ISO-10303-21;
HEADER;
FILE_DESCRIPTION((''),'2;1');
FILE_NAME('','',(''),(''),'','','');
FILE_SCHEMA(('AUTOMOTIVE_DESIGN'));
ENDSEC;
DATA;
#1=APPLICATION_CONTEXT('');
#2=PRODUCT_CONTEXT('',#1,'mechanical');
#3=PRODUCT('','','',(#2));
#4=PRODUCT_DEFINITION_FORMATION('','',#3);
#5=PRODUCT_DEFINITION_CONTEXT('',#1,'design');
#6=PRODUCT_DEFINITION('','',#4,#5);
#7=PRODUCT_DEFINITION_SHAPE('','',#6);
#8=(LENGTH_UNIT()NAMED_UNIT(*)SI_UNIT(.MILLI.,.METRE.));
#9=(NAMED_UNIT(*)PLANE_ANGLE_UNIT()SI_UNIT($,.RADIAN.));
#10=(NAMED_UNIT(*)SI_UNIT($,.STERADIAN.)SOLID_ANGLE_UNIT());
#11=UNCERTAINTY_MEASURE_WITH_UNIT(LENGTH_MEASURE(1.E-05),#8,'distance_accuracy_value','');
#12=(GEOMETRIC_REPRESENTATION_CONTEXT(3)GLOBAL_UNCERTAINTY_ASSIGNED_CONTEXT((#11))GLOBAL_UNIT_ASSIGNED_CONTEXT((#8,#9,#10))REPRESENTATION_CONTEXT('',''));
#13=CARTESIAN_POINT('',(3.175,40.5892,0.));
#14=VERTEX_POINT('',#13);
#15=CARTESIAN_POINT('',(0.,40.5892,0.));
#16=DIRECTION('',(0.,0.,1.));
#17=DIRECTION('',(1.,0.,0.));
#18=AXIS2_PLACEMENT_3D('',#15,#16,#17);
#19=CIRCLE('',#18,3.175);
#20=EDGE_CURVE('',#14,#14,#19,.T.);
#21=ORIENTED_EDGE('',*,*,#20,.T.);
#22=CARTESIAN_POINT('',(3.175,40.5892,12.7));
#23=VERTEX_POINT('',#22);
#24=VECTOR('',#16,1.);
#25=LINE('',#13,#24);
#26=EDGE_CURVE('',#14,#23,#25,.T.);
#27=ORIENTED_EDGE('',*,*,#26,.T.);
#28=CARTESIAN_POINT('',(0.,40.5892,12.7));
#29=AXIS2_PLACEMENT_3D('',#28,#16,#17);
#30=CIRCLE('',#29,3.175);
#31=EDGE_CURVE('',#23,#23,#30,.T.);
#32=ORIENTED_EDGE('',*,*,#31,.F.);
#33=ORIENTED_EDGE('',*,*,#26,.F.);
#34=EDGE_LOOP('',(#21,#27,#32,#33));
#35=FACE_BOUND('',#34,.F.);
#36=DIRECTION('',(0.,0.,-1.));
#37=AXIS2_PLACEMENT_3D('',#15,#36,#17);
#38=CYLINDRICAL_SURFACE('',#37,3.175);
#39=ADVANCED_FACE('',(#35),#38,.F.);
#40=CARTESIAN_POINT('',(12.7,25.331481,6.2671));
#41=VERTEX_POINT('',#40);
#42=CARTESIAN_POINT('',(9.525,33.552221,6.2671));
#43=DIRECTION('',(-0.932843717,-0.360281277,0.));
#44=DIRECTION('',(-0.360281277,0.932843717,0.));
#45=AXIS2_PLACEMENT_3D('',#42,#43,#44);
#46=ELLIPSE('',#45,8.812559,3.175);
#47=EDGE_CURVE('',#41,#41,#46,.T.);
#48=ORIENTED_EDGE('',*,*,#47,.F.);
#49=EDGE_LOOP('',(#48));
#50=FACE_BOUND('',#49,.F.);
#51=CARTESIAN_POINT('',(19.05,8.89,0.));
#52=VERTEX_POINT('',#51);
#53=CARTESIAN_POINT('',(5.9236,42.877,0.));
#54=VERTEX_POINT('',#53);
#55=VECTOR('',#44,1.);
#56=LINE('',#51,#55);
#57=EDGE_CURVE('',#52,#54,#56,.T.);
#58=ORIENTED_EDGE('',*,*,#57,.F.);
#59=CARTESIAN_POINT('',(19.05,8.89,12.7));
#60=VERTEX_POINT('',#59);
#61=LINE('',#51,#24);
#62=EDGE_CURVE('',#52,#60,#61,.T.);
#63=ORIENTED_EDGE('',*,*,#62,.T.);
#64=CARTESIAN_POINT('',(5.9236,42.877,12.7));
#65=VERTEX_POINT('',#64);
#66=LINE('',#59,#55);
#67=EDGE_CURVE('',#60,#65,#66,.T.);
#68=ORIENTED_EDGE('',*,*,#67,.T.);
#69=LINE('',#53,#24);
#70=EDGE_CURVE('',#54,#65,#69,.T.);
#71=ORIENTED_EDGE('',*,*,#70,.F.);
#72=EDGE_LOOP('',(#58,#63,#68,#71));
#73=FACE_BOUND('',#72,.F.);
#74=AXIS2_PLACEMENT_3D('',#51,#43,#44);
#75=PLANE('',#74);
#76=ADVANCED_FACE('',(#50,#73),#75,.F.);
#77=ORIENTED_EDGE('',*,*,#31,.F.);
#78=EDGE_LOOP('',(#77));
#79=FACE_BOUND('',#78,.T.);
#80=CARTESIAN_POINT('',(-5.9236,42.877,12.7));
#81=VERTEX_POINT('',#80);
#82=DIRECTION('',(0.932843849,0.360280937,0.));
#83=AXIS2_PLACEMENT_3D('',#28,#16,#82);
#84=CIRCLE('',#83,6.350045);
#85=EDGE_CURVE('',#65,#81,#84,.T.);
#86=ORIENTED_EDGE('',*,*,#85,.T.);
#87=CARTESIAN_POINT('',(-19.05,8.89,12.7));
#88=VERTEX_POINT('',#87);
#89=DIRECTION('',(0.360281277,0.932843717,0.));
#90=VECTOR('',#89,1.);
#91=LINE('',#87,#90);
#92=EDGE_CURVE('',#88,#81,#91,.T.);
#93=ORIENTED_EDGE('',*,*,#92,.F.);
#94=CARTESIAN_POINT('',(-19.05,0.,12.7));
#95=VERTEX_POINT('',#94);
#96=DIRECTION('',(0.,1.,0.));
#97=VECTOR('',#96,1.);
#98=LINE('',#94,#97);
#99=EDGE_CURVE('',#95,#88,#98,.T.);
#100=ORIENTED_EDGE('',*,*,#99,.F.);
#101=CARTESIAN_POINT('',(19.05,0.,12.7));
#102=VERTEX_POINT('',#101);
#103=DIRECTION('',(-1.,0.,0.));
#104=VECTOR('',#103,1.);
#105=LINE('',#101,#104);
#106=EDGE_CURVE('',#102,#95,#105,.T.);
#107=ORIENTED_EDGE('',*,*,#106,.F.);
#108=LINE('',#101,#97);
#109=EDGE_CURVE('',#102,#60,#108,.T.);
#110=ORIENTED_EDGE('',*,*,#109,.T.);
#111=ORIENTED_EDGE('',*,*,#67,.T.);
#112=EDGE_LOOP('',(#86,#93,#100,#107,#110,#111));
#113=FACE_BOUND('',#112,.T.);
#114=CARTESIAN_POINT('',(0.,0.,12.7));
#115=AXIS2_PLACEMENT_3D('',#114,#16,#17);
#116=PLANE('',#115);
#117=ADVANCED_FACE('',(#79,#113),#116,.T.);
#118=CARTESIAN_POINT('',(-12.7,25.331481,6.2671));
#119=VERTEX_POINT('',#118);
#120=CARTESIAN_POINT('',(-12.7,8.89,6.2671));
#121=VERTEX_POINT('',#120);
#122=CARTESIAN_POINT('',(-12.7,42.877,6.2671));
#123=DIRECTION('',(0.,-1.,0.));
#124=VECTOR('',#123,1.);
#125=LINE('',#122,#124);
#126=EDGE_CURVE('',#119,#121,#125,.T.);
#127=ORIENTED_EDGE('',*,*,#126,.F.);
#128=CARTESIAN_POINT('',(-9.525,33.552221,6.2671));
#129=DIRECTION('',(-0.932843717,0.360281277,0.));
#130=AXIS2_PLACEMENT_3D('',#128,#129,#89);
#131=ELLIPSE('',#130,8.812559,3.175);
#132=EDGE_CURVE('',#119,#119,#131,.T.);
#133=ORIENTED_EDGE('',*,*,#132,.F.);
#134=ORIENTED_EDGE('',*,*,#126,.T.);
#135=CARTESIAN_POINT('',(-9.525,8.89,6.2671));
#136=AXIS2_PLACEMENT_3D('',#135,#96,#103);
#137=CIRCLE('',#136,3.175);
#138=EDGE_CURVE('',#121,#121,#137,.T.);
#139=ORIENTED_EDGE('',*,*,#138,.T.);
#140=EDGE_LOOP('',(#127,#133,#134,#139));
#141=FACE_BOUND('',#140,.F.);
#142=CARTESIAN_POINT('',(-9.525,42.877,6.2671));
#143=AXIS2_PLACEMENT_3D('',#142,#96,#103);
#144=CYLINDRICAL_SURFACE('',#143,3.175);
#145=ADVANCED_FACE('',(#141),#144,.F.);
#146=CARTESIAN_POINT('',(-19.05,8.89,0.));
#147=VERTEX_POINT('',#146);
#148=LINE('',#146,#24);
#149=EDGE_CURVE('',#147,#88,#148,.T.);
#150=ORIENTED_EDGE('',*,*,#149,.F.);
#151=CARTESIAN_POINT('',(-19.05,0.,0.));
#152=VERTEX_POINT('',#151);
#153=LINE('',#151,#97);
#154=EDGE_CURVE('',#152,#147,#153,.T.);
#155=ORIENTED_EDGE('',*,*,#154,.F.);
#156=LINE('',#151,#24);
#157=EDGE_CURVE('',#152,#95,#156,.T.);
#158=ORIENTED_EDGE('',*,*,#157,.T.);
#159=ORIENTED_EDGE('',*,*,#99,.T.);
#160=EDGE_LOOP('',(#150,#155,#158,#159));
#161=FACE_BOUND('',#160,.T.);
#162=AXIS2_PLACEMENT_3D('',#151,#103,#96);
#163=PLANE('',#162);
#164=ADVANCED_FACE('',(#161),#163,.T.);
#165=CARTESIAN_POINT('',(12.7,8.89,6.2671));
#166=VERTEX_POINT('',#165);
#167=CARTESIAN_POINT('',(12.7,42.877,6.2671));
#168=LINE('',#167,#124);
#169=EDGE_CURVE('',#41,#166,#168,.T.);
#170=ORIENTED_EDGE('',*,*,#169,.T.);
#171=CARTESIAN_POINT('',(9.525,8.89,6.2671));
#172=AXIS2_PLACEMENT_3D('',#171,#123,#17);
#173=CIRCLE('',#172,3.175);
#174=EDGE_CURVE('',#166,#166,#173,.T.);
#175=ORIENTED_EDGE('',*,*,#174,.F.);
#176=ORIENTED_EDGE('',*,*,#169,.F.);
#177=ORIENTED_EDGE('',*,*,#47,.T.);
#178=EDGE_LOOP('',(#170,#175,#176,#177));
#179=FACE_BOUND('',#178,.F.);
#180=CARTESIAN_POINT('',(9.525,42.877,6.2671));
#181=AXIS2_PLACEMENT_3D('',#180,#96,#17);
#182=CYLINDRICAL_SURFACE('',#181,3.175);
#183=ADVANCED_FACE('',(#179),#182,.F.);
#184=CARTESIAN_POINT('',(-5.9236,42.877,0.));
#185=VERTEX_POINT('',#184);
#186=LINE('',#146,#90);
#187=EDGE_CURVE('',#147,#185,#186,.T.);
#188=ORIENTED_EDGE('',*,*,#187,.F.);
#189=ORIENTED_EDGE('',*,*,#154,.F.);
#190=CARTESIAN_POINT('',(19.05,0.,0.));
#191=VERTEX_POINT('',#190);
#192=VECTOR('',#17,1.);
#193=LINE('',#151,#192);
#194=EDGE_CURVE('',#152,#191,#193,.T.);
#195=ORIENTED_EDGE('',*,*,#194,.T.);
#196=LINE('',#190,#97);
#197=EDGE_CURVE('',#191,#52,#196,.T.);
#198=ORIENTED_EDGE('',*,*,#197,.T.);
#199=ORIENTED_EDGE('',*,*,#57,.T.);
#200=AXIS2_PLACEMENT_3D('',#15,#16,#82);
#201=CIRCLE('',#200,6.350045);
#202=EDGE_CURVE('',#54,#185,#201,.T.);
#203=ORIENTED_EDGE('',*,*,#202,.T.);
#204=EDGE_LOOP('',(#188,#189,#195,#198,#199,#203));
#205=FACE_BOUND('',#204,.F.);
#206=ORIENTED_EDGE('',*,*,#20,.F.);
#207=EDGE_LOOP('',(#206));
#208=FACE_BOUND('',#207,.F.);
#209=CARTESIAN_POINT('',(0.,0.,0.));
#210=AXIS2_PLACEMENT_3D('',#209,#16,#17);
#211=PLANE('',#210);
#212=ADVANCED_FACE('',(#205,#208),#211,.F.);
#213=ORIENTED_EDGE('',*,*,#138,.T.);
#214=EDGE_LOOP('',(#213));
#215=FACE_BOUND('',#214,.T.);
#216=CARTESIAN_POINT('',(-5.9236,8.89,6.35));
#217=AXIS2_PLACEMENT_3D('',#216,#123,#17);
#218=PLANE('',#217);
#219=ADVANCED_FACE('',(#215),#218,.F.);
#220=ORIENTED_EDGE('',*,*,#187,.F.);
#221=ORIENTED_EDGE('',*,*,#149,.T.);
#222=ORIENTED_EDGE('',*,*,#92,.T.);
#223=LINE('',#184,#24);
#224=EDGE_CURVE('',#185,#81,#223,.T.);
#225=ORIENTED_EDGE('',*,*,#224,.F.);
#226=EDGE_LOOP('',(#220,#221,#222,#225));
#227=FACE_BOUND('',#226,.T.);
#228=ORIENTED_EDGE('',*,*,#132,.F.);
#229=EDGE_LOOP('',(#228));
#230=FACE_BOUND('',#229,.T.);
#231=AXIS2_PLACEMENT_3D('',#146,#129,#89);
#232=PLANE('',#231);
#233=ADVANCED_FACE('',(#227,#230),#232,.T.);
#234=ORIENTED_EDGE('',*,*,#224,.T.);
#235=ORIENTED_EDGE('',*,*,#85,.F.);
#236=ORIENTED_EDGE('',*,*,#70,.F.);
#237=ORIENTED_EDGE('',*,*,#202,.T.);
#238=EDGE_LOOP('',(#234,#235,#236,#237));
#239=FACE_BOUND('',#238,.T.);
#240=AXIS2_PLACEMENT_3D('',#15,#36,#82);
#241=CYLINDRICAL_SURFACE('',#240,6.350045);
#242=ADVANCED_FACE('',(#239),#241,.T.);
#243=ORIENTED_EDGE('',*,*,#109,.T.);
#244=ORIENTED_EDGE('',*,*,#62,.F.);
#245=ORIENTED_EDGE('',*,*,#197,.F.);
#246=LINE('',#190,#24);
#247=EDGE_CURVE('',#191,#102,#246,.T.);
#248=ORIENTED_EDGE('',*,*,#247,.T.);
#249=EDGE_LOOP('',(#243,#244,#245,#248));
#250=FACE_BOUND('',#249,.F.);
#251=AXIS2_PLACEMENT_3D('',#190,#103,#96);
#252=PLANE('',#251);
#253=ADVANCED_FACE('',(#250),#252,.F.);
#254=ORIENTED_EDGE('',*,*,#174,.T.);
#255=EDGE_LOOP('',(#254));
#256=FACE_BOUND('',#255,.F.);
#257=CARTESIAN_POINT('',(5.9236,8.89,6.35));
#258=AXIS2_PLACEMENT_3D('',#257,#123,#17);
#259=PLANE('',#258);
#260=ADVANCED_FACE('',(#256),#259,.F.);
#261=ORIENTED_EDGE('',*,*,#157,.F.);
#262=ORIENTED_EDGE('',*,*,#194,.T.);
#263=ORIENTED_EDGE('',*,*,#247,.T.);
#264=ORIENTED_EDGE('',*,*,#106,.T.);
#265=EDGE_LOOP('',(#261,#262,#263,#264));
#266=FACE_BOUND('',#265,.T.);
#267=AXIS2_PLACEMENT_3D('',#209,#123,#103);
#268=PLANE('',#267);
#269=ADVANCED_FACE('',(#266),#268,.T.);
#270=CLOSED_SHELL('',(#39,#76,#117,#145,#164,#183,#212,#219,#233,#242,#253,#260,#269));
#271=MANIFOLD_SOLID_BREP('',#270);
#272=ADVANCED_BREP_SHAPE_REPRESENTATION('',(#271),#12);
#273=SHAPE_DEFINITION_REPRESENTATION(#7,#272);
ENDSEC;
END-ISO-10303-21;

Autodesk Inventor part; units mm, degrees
ref_plane "YZ Plane" through (0, 0, 0) normal (1, 0, 0) x (0, 1, 0)
ref_plane "XZ Plane" through (0, 0, 0) normal (0, 1, 0) x (-1, 0, 0)
sketch "Sketch1" plane through (0, 0, 0) normal (0, 0, 1) x (1, 0, 0)
  line L0 (0, 0) -> (0, 40.5892) construction
  circle A0 centre (0, 40.5892) radius 3.175
  line L1 (0, 0) -> (-19.05, 0)
  arc A1 (5.9236, 42.877) -> (-5.9236, 42.877) centre (0, 40.5892) ccw
  line L2 (-19.05, 0) -> (-19.05, 8.89)
  line L3 (-19.05, 8.89) -> (-5.9236, 42.877)
  line L4 (0, 0) -> (19.05, 0)
  line L5 (19.05, 0) -> (19.05, 8.89)
  line L6 (19.05, 8.89) -> (5.9236, 42.877)
  dimension "d0" = 40.5892
  dimension "d1" = 6.35
  dimension "d3" = 19.05
  dimension "d4" = 12.7
  dimension "d7" = 8.89
extrude "Extrusion1" add sketch "Sketch1" along normal blind 12.7
ref_plane "Work Plane1" through (5.9236, 42.877, 6.35) normal (0, -1, 0) x (1, 0, 0)
sketch "Sketch3" plane through (5.9236, 42.877, 6.35) normal (0, -1, 0) x (1, 0, 0)
  line L0 (3.6014, 6.1842) -> (3.6014, -6.35) construction
  circle A0 centre (3.6014, -0.0829) radius 3.175
  point P0 (-5.9236, -6.35)
  point P1 (3.6014, 6.35)
  point P2 (3.6014, 6.35)
  point P3 (3.6014, 6.35)
  dimension "d12" = 6.35
extrude "Extrusion2" cut sketch "Sketch3" along normal up to surface (33.987 mm away)
mirror "Mirror1" about plane through (0, 0, 0) normal (1, 0, 0) of "Extrusion2"
properties part number "Y_axis_motor_shaft_end_support" material "Aluminum 6061"
